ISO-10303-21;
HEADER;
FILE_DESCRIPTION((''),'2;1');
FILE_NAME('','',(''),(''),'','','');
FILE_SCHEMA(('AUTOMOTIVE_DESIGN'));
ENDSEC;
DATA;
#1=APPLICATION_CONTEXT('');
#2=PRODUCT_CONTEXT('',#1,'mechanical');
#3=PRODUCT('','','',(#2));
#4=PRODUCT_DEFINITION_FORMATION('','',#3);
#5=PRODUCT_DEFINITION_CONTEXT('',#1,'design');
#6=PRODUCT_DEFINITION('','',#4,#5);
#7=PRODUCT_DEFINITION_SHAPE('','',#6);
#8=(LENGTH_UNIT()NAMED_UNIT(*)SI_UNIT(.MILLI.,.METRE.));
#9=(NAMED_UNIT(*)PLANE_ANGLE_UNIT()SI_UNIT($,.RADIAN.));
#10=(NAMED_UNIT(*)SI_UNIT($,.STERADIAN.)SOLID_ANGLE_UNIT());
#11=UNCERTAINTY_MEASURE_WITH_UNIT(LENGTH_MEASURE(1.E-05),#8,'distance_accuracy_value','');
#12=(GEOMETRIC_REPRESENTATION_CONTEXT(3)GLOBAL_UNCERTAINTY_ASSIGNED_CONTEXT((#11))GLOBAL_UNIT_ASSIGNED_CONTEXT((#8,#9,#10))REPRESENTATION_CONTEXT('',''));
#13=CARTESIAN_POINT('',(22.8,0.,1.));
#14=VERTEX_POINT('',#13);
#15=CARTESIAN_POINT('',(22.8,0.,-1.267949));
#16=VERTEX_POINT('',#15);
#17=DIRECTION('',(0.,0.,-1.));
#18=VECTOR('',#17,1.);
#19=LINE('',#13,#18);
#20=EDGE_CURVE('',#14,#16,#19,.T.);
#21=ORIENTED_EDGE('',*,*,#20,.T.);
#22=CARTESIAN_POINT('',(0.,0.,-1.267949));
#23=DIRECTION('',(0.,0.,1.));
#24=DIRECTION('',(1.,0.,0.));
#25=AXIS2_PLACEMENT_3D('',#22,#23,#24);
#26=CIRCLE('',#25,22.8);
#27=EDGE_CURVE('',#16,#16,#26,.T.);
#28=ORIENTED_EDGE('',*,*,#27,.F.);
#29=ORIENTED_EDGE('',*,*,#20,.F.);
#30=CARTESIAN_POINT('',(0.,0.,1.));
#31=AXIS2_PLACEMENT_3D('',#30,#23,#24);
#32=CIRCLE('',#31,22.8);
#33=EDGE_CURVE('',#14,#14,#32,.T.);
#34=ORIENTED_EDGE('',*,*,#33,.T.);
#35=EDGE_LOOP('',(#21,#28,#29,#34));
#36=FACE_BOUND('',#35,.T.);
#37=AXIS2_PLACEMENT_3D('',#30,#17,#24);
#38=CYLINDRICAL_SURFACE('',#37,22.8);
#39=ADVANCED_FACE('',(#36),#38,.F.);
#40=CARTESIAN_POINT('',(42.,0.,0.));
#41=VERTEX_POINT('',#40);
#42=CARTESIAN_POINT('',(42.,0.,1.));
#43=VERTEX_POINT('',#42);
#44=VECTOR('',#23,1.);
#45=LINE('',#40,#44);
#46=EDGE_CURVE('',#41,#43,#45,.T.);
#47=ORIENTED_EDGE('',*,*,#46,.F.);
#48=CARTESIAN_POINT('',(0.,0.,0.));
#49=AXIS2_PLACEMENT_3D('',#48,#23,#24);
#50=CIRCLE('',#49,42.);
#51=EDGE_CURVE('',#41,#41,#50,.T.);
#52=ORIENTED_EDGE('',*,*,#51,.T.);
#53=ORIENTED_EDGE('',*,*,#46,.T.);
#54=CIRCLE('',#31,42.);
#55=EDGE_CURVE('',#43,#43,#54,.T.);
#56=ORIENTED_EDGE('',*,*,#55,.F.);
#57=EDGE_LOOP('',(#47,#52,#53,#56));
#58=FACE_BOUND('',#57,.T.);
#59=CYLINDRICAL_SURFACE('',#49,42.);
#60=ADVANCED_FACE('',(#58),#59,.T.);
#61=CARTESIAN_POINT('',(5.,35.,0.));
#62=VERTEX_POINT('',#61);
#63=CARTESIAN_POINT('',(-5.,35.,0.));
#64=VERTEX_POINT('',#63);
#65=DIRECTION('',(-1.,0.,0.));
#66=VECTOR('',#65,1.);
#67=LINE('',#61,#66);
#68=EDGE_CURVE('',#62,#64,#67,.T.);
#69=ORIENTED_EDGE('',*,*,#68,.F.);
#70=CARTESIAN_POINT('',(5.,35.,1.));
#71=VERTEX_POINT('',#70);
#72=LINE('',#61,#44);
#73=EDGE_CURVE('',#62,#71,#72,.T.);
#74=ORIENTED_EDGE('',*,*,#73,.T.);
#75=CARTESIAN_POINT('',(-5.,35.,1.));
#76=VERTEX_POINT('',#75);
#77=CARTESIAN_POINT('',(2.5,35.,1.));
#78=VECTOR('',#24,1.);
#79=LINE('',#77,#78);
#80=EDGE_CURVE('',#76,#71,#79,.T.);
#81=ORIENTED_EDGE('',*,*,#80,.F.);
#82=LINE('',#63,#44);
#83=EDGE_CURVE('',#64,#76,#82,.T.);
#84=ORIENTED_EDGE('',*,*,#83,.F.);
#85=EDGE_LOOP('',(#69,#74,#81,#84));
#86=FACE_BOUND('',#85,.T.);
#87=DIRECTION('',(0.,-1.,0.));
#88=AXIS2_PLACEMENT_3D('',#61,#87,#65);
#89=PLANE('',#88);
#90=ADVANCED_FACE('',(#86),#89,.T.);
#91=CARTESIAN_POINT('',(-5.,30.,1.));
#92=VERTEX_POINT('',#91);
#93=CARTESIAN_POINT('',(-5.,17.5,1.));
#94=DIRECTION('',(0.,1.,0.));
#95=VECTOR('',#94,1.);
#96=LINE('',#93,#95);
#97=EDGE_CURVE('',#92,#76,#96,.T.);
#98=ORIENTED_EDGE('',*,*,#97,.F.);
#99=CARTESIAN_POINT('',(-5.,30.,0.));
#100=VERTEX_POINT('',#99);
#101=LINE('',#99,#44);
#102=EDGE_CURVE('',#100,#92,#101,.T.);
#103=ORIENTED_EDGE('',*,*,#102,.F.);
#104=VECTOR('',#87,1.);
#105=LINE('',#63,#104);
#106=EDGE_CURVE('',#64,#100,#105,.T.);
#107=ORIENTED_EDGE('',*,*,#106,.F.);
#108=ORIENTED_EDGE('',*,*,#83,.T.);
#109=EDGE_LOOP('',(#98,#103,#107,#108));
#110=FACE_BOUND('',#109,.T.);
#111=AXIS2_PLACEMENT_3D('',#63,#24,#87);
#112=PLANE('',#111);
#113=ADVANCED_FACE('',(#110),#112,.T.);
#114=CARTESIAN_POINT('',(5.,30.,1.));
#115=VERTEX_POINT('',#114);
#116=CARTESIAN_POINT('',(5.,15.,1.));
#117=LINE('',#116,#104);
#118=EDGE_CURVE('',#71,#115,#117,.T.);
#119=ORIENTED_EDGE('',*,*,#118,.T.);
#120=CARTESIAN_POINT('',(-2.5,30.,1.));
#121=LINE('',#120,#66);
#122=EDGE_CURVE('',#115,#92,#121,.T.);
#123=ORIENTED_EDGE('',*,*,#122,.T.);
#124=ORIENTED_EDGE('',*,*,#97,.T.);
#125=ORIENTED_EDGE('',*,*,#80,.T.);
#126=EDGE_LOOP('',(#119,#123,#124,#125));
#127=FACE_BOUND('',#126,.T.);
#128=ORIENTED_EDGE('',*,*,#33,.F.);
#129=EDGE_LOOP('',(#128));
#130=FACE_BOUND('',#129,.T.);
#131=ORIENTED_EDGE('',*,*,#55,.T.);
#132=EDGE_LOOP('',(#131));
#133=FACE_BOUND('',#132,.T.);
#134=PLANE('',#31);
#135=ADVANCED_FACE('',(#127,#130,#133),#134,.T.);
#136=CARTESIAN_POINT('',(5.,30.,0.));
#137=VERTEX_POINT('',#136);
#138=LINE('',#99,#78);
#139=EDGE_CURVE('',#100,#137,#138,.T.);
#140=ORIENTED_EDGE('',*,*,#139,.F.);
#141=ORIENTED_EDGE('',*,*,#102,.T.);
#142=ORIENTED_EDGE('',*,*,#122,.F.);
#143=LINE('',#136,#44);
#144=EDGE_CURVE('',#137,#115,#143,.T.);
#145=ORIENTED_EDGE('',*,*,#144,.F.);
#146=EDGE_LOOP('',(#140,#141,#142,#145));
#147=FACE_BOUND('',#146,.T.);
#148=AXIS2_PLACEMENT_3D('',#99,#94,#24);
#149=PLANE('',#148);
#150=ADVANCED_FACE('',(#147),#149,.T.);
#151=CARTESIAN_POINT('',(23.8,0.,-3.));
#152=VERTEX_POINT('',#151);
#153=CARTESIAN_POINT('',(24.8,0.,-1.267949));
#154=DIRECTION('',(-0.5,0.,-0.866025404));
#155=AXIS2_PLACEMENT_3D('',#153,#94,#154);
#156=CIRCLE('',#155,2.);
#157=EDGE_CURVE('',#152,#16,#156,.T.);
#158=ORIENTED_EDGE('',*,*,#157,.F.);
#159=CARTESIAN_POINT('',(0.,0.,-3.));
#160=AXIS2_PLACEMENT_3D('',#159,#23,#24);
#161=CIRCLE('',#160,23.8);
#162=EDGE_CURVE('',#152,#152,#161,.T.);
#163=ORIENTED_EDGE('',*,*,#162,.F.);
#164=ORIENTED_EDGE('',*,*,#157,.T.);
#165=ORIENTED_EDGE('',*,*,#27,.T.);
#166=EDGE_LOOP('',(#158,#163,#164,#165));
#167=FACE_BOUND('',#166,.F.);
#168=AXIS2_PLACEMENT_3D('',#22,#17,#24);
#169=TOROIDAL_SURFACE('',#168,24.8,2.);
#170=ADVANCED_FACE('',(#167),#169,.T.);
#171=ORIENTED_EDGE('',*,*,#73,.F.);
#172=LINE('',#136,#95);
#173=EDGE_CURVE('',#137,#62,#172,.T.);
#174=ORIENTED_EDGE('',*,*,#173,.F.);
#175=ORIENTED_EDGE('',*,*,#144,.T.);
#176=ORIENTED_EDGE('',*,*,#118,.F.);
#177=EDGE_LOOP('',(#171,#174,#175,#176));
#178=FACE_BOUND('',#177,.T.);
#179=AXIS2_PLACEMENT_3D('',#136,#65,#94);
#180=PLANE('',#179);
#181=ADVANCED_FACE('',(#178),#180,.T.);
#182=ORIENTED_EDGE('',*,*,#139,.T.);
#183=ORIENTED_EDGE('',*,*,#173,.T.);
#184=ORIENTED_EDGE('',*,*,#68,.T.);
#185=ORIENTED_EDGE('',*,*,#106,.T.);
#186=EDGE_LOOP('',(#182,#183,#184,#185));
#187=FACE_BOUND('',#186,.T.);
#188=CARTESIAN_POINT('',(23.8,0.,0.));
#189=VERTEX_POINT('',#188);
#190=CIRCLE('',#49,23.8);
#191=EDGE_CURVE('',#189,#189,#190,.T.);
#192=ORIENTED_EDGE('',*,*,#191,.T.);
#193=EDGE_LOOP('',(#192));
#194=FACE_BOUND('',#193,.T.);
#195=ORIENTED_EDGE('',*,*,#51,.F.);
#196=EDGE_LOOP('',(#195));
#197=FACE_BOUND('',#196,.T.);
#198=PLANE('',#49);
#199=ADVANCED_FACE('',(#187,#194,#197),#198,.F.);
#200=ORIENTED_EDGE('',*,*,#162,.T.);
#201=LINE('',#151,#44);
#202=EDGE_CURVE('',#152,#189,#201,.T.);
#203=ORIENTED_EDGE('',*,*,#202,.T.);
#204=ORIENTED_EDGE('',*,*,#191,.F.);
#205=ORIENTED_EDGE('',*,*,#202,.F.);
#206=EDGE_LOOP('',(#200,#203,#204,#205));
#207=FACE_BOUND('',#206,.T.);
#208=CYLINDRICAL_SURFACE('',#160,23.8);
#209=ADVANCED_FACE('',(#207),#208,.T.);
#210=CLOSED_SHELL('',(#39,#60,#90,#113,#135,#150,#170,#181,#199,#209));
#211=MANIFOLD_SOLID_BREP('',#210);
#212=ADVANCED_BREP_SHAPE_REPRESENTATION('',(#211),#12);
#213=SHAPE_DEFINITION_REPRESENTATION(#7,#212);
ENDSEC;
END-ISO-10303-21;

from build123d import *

# Parameters (mm, degrees)
F3_DEPTH = 25


# Not quite as in the source:
# - a fillet or chamfer that OpenCascade refuses, or shapes differently, is made with other operations: its cross-section is extruded or revolved along the edge and cut away or added


with BuildPart() as f1:
    # F0 (on Front) → F1 (revolve)
    with BuildSketch(Plane.XZ):
        Polygon((22.8, -3), (23.8, -3), (23.8, 0), (42, 0), (42, 1), (22.8, 1), align=None)
    revolve(axis=Axis((0, 0, 4.016155377), (0, 0, 1)))

    # F2 (on Top) → F3 (cut)
    with BuildSketch(Plane.XY):
        Polygon((-5, 30), (0, 30), (5, 30), (5, 35), (-5, 35), align=None)
    extrude(amount=F3_DEPTH, mode=Mode.SUBTRACT)

    # F4: fillet of radius 2 on 1 edges, made by hand

    # F4_s1 → F4_t2 (revolve, cut)
    with BuildSketch(Plane.XZ):
        with BuildLine():
            ThreePointArc((23.8, -3), (23.0679491924, -2.2679491924), (22.8, -1.2679491924))
            Line((22.8, -1.2679491924), (22.8, -3))
            Line((22.8, -3), (23.8, -3))
        make_face()
    revolve(axis=Axis((0, 0, -3), (0, 0, 1)), mode=Mode.SUBTRACT)


solid = f1.part
